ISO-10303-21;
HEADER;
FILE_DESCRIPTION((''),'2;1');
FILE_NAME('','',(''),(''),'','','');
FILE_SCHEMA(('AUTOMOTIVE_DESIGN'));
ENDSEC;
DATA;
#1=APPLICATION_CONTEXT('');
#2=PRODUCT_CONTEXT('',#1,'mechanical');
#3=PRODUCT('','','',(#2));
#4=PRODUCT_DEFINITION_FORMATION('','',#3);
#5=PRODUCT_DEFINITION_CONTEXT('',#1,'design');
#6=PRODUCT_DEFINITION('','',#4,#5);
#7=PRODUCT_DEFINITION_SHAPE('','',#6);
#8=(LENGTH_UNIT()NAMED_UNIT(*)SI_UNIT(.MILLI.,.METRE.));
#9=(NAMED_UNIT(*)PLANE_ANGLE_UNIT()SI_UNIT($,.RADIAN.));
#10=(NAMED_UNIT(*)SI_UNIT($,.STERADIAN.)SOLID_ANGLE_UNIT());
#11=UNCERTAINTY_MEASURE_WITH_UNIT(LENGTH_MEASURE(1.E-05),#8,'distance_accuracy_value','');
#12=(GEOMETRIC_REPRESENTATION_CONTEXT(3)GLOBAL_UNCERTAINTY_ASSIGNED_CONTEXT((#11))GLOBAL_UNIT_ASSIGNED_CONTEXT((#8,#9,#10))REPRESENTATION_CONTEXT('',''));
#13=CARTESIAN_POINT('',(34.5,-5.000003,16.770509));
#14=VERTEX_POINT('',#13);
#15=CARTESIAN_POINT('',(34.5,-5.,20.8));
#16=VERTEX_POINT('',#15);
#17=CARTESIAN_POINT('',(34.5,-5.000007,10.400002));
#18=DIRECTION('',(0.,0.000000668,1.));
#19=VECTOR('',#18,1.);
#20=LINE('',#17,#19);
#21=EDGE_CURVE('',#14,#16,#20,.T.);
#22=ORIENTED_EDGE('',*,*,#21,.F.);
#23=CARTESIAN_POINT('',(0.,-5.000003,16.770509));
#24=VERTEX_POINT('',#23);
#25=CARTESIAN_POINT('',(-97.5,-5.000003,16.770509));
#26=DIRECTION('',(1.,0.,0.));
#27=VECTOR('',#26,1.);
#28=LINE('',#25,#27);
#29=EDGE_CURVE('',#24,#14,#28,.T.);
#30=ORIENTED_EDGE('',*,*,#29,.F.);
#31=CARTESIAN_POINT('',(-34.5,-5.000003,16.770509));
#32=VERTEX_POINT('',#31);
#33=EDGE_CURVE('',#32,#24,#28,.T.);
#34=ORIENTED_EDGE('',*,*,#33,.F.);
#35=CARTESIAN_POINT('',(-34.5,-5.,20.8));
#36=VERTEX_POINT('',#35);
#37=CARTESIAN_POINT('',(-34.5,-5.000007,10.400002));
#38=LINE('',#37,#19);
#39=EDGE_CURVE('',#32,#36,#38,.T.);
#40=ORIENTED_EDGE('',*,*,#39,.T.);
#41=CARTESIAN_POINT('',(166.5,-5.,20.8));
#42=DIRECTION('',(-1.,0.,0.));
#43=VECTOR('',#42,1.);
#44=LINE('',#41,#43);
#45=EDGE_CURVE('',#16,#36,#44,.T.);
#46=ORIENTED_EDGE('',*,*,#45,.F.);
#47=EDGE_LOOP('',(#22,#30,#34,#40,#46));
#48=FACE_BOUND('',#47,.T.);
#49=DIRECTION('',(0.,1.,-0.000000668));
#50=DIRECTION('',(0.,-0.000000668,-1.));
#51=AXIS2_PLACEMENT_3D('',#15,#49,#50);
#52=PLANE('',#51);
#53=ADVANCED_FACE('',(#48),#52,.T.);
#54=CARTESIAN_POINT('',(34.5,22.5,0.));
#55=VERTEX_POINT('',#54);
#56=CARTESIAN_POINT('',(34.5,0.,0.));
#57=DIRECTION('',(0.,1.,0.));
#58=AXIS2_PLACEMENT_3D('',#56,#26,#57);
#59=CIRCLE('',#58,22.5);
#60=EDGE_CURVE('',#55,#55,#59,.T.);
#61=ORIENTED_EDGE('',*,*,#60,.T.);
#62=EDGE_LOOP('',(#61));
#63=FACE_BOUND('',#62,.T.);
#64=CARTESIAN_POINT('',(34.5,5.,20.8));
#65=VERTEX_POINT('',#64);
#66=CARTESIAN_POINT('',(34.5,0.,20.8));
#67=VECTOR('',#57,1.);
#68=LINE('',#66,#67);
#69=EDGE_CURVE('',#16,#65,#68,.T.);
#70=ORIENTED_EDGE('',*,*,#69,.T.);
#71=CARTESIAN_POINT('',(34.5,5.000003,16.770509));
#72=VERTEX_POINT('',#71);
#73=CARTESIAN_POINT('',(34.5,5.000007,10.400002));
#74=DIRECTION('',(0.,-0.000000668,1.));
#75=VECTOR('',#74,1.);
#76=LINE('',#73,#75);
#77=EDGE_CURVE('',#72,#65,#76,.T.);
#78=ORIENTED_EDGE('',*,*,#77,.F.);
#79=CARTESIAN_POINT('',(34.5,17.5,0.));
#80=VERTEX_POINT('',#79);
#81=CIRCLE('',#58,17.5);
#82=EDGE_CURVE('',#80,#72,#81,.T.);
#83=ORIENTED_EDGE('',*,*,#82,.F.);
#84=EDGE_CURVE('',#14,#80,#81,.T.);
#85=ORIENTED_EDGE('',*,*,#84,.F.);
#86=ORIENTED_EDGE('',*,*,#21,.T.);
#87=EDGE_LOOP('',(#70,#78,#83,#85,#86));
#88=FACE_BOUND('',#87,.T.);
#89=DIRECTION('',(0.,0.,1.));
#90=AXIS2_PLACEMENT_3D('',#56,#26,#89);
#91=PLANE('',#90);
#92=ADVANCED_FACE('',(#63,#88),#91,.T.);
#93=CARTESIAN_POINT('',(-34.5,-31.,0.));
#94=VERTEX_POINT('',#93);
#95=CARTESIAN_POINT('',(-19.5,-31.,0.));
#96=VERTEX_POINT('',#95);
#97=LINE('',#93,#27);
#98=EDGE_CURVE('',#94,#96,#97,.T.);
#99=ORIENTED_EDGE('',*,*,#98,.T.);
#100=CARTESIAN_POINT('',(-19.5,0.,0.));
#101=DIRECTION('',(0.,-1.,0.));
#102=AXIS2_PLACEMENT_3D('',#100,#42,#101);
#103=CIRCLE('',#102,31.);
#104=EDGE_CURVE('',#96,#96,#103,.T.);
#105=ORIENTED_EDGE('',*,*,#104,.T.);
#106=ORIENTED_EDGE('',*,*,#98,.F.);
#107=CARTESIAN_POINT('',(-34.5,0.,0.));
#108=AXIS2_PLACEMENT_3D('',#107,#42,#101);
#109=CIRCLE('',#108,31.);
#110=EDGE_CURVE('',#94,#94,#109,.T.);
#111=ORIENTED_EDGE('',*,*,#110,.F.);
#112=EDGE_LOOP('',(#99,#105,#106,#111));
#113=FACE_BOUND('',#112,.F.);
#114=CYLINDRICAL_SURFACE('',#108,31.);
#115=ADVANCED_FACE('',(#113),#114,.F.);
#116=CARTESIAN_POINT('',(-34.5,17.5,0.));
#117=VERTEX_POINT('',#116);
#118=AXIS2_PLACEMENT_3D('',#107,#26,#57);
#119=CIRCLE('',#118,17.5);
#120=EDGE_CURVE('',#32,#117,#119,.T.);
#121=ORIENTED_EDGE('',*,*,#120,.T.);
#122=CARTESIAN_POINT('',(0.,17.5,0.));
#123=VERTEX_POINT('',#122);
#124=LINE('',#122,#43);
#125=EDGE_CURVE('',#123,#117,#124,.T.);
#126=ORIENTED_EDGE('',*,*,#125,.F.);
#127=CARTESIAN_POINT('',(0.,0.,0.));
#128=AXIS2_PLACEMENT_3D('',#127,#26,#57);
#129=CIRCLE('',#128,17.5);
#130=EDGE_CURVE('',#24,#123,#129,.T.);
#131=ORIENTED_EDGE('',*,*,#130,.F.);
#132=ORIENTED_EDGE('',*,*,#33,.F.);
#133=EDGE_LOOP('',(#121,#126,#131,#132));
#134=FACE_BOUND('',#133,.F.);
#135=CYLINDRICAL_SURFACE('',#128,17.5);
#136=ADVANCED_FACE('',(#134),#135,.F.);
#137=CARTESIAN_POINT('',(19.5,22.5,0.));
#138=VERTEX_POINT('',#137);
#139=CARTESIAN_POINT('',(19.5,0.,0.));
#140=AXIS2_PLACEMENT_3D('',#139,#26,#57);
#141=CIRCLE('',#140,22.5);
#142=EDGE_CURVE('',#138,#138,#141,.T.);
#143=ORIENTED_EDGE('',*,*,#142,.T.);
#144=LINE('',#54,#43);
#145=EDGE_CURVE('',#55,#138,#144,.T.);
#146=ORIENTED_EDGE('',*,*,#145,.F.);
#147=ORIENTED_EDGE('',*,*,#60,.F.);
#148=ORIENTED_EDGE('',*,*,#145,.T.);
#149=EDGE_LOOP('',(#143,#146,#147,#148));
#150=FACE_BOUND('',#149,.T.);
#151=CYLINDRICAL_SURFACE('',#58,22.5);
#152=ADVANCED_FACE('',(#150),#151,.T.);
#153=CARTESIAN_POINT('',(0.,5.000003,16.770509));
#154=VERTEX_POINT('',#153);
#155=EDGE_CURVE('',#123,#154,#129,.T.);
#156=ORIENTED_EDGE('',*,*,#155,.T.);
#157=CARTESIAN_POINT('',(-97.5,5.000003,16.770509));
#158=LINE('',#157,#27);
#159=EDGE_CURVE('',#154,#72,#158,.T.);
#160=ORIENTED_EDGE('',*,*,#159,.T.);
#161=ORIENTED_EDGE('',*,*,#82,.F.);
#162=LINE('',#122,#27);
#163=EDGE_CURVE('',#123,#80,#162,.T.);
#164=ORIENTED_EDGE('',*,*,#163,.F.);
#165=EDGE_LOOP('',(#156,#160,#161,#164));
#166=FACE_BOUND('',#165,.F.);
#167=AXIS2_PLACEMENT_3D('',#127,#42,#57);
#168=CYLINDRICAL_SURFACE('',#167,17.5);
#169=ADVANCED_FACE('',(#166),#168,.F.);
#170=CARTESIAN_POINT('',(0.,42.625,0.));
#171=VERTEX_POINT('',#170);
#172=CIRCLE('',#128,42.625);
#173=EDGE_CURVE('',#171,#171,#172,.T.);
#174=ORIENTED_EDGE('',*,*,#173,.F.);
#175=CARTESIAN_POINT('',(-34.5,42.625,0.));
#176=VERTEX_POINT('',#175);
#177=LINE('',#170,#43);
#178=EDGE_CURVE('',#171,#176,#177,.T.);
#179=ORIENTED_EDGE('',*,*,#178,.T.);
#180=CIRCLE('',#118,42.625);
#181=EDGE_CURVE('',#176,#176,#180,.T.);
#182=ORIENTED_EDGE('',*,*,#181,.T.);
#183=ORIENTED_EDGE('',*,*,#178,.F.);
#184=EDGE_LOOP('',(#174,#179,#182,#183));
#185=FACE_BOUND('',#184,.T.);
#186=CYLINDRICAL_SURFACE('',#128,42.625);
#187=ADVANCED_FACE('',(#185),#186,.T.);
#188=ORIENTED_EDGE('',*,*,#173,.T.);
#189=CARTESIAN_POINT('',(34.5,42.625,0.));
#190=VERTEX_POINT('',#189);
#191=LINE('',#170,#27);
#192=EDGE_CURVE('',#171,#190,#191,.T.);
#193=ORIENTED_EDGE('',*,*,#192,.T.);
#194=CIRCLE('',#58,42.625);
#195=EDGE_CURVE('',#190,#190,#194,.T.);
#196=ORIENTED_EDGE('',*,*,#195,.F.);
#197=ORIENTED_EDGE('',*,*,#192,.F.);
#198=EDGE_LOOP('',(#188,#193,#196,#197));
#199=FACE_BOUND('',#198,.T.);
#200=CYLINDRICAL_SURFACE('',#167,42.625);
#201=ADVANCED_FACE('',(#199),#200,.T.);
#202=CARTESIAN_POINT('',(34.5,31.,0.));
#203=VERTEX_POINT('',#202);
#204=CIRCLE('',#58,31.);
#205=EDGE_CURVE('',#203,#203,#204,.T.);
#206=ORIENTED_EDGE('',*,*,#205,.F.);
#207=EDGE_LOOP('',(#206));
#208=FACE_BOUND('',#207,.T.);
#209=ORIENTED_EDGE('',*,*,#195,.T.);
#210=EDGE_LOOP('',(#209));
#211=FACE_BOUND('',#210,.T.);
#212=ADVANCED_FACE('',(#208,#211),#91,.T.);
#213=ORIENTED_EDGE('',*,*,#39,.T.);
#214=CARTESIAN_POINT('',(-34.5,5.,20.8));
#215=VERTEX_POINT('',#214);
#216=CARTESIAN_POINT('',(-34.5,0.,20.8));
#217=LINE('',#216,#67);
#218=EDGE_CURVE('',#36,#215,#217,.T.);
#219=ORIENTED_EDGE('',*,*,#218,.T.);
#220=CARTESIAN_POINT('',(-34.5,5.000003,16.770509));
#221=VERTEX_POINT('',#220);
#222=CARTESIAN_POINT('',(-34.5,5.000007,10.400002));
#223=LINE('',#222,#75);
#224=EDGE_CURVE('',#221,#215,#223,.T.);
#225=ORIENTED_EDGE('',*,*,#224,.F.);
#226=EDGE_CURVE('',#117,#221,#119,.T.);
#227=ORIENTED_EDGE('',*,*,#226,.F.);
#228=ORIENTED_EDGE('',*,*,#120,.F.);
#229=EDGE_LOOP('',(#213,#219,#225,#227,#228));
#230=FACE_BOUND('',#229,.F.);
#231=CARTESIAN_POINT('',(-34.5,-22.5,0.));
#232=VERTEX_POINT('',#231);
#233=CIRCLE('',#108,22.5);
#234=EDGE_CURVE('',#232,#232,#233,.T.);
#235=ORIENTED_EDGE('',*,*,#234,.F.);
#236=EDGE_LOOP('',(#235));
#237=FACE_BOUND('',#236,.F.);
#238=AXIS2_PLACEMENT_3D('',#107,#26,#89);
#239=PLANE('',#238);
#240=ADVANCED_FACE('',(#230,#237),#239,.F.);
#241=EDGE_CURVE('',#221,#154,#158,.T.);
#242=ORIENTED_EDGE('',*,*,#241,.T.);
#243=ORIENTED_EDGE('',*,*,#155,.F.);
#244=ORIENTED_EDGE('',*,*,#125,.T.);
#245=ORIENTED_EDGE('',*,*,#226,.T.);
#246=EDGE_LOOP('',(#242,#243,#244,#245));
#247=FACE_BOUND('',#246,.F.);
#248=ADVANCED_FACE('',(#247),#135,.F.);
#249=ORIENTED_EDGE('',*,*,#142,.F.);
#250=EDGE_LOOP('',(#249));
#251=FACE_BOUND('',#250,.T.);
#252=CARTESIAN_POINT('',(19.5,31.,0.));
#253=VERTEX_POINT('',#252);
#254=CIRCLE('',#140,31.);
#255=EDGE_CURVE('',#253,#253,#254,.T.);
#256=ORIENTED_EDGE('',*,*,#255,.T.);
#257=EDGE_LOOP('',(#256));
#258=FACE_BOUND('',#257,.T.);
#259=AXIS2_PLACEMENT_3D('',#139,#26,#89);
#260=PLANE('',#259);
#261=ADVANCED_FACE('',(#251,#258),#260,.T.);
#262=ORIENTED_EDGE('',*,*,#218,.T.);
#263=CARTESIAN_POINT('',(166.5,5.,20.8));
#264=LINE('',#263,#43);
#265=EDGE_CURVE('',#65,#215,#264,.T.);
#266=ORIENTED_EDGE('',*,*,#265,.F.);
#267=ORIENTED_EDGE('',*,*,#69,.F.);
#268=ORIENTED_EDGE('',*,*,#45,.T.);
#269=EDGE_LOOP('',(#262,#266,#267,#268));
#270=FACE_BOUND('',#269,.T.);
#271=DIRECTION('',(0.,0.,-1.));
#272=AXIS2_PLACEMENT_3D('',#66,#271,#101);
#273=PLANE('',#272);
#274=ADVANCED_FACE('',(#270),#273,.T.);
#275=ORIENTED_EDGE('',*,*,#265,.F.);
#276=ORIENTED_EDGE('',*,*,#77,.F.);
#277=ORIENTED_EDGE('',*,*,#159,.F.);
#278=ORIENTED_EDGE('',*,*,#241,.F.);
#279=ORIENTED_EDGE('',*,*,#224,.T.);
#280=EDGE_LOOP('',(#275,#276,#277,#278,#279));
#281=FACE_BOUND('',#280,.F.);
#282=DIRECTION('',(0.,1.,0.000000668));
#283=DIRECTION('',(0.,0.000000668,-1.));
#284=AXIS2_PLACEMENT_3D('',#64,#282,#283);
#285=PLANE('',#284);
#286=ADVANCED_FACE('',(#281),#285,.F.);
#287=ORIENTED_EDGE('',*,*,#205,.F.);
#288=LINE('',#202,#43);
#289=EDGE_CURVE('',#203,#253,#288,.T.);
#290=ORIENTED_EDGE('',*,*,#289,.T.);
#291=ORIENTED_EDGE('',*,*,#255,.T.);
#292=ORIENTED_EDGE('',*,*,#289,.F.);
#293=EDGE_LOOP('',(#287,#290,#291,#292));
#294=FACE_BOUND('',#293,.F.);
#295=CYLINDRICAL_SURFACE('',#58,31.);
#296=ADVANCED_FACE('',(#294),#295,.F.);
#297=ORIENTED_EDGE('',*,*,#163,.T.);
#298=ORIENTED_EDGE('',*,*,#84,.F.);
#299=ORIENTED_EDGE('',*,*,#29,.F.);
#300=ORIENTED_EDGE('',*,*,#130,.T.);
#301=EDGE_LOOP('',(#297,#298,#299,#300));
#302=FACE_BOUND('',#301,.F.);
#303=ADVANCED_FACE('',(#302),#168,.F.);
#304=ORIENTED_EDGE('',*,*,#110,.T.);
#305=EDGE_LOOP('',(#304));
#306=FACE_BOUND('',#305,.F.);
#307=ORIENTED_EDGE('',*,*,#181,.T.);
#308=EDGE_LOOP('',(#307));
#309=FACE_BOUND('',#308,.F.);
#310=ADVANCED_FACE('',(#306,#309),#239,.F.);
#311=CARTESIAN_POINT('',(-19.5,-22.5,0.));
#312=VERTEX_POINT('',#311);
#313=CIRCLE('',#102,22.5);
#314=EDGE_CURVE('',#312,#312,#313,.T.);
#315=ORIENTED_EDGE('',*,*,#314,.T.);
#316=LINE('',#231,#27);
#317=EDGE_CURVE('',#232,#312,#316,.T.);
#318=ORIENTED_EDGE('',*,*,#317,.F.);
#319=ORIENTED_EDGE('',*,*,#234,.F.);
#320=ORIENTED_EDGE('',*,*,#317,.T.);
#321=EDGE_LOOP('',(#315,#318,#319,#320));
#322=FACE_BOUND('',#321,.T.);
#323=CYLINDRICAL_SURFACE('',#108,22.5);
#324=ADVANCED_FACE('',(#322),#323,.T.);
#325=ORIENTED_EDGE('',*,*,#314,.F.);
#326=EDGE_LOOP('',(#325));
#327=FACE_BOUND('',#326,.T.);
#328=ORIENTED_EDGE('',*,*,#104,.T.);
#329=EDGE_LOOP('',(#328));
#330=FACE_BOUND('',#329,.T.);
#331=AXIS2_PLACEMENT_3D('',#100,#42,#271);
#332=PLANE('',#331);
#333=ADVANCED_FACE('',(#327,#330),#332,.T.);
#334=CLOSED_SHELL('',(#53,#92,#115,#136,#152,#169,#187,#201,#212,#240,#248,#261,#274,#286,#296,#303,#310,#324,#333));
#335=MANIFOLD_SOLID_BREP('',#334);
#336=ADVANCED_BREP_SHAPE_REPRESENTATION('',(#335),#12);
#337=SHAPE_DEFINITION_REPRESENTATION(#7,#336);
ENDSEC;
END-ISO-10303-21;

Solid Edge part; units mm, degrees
sketch "Sketch1" plane through (0, 0, 0) normal (1, 0, 0) x (0, 1, 0)
  circle A0 centre (0, 0) radius 17.5
  circle A1 centre (0, 0) radius 42.625
extrude "Protrusion1" add sketch "Sketch1" along normal mid plane 69
sketch "Sketch2" plane through (-34.5, 0, 0) normal (-1, 0, 0) x (0, -1, 0)
  circle A0 centre (0, 0) radius 22.5
  circle A1 centre (0, 0) radius 31
extrude "VaciadoExtruido_1" cut sketch "Sketch2" against normal blind 15
sketch "Sketch3" plane through (34.5, 0, 0) normal (1, 0, 0) x (0, 1, 0)
  circle A0 centre (0, 0) radius 22.5
  circle A1 centre (0, 0) radius 31
extrude "Cutout1" cut sketch "Sketch3" against normal blind 15
sketch "Sketch4" plane through (34.5, 0, 0) normal (1, 0, 0) x (0, 1, 0)
  line L0 (-5, 20.8) -> (-5, 16.7705)
  line L1 (0, 20.8) -> (-5, 20.8)
  line L2 (0, 20.8) -> (5, 20.8)
  line L3 (5, 20.8) -> (5, 16.7705)
  arc A0 (-5, 16.7705) -> (5, 16.7705) centre (0, 0) cw
extrude "VaciadoExtruido_36" cut sketch "Sketch4" along normal mid plane 264
properties material "Acero"
